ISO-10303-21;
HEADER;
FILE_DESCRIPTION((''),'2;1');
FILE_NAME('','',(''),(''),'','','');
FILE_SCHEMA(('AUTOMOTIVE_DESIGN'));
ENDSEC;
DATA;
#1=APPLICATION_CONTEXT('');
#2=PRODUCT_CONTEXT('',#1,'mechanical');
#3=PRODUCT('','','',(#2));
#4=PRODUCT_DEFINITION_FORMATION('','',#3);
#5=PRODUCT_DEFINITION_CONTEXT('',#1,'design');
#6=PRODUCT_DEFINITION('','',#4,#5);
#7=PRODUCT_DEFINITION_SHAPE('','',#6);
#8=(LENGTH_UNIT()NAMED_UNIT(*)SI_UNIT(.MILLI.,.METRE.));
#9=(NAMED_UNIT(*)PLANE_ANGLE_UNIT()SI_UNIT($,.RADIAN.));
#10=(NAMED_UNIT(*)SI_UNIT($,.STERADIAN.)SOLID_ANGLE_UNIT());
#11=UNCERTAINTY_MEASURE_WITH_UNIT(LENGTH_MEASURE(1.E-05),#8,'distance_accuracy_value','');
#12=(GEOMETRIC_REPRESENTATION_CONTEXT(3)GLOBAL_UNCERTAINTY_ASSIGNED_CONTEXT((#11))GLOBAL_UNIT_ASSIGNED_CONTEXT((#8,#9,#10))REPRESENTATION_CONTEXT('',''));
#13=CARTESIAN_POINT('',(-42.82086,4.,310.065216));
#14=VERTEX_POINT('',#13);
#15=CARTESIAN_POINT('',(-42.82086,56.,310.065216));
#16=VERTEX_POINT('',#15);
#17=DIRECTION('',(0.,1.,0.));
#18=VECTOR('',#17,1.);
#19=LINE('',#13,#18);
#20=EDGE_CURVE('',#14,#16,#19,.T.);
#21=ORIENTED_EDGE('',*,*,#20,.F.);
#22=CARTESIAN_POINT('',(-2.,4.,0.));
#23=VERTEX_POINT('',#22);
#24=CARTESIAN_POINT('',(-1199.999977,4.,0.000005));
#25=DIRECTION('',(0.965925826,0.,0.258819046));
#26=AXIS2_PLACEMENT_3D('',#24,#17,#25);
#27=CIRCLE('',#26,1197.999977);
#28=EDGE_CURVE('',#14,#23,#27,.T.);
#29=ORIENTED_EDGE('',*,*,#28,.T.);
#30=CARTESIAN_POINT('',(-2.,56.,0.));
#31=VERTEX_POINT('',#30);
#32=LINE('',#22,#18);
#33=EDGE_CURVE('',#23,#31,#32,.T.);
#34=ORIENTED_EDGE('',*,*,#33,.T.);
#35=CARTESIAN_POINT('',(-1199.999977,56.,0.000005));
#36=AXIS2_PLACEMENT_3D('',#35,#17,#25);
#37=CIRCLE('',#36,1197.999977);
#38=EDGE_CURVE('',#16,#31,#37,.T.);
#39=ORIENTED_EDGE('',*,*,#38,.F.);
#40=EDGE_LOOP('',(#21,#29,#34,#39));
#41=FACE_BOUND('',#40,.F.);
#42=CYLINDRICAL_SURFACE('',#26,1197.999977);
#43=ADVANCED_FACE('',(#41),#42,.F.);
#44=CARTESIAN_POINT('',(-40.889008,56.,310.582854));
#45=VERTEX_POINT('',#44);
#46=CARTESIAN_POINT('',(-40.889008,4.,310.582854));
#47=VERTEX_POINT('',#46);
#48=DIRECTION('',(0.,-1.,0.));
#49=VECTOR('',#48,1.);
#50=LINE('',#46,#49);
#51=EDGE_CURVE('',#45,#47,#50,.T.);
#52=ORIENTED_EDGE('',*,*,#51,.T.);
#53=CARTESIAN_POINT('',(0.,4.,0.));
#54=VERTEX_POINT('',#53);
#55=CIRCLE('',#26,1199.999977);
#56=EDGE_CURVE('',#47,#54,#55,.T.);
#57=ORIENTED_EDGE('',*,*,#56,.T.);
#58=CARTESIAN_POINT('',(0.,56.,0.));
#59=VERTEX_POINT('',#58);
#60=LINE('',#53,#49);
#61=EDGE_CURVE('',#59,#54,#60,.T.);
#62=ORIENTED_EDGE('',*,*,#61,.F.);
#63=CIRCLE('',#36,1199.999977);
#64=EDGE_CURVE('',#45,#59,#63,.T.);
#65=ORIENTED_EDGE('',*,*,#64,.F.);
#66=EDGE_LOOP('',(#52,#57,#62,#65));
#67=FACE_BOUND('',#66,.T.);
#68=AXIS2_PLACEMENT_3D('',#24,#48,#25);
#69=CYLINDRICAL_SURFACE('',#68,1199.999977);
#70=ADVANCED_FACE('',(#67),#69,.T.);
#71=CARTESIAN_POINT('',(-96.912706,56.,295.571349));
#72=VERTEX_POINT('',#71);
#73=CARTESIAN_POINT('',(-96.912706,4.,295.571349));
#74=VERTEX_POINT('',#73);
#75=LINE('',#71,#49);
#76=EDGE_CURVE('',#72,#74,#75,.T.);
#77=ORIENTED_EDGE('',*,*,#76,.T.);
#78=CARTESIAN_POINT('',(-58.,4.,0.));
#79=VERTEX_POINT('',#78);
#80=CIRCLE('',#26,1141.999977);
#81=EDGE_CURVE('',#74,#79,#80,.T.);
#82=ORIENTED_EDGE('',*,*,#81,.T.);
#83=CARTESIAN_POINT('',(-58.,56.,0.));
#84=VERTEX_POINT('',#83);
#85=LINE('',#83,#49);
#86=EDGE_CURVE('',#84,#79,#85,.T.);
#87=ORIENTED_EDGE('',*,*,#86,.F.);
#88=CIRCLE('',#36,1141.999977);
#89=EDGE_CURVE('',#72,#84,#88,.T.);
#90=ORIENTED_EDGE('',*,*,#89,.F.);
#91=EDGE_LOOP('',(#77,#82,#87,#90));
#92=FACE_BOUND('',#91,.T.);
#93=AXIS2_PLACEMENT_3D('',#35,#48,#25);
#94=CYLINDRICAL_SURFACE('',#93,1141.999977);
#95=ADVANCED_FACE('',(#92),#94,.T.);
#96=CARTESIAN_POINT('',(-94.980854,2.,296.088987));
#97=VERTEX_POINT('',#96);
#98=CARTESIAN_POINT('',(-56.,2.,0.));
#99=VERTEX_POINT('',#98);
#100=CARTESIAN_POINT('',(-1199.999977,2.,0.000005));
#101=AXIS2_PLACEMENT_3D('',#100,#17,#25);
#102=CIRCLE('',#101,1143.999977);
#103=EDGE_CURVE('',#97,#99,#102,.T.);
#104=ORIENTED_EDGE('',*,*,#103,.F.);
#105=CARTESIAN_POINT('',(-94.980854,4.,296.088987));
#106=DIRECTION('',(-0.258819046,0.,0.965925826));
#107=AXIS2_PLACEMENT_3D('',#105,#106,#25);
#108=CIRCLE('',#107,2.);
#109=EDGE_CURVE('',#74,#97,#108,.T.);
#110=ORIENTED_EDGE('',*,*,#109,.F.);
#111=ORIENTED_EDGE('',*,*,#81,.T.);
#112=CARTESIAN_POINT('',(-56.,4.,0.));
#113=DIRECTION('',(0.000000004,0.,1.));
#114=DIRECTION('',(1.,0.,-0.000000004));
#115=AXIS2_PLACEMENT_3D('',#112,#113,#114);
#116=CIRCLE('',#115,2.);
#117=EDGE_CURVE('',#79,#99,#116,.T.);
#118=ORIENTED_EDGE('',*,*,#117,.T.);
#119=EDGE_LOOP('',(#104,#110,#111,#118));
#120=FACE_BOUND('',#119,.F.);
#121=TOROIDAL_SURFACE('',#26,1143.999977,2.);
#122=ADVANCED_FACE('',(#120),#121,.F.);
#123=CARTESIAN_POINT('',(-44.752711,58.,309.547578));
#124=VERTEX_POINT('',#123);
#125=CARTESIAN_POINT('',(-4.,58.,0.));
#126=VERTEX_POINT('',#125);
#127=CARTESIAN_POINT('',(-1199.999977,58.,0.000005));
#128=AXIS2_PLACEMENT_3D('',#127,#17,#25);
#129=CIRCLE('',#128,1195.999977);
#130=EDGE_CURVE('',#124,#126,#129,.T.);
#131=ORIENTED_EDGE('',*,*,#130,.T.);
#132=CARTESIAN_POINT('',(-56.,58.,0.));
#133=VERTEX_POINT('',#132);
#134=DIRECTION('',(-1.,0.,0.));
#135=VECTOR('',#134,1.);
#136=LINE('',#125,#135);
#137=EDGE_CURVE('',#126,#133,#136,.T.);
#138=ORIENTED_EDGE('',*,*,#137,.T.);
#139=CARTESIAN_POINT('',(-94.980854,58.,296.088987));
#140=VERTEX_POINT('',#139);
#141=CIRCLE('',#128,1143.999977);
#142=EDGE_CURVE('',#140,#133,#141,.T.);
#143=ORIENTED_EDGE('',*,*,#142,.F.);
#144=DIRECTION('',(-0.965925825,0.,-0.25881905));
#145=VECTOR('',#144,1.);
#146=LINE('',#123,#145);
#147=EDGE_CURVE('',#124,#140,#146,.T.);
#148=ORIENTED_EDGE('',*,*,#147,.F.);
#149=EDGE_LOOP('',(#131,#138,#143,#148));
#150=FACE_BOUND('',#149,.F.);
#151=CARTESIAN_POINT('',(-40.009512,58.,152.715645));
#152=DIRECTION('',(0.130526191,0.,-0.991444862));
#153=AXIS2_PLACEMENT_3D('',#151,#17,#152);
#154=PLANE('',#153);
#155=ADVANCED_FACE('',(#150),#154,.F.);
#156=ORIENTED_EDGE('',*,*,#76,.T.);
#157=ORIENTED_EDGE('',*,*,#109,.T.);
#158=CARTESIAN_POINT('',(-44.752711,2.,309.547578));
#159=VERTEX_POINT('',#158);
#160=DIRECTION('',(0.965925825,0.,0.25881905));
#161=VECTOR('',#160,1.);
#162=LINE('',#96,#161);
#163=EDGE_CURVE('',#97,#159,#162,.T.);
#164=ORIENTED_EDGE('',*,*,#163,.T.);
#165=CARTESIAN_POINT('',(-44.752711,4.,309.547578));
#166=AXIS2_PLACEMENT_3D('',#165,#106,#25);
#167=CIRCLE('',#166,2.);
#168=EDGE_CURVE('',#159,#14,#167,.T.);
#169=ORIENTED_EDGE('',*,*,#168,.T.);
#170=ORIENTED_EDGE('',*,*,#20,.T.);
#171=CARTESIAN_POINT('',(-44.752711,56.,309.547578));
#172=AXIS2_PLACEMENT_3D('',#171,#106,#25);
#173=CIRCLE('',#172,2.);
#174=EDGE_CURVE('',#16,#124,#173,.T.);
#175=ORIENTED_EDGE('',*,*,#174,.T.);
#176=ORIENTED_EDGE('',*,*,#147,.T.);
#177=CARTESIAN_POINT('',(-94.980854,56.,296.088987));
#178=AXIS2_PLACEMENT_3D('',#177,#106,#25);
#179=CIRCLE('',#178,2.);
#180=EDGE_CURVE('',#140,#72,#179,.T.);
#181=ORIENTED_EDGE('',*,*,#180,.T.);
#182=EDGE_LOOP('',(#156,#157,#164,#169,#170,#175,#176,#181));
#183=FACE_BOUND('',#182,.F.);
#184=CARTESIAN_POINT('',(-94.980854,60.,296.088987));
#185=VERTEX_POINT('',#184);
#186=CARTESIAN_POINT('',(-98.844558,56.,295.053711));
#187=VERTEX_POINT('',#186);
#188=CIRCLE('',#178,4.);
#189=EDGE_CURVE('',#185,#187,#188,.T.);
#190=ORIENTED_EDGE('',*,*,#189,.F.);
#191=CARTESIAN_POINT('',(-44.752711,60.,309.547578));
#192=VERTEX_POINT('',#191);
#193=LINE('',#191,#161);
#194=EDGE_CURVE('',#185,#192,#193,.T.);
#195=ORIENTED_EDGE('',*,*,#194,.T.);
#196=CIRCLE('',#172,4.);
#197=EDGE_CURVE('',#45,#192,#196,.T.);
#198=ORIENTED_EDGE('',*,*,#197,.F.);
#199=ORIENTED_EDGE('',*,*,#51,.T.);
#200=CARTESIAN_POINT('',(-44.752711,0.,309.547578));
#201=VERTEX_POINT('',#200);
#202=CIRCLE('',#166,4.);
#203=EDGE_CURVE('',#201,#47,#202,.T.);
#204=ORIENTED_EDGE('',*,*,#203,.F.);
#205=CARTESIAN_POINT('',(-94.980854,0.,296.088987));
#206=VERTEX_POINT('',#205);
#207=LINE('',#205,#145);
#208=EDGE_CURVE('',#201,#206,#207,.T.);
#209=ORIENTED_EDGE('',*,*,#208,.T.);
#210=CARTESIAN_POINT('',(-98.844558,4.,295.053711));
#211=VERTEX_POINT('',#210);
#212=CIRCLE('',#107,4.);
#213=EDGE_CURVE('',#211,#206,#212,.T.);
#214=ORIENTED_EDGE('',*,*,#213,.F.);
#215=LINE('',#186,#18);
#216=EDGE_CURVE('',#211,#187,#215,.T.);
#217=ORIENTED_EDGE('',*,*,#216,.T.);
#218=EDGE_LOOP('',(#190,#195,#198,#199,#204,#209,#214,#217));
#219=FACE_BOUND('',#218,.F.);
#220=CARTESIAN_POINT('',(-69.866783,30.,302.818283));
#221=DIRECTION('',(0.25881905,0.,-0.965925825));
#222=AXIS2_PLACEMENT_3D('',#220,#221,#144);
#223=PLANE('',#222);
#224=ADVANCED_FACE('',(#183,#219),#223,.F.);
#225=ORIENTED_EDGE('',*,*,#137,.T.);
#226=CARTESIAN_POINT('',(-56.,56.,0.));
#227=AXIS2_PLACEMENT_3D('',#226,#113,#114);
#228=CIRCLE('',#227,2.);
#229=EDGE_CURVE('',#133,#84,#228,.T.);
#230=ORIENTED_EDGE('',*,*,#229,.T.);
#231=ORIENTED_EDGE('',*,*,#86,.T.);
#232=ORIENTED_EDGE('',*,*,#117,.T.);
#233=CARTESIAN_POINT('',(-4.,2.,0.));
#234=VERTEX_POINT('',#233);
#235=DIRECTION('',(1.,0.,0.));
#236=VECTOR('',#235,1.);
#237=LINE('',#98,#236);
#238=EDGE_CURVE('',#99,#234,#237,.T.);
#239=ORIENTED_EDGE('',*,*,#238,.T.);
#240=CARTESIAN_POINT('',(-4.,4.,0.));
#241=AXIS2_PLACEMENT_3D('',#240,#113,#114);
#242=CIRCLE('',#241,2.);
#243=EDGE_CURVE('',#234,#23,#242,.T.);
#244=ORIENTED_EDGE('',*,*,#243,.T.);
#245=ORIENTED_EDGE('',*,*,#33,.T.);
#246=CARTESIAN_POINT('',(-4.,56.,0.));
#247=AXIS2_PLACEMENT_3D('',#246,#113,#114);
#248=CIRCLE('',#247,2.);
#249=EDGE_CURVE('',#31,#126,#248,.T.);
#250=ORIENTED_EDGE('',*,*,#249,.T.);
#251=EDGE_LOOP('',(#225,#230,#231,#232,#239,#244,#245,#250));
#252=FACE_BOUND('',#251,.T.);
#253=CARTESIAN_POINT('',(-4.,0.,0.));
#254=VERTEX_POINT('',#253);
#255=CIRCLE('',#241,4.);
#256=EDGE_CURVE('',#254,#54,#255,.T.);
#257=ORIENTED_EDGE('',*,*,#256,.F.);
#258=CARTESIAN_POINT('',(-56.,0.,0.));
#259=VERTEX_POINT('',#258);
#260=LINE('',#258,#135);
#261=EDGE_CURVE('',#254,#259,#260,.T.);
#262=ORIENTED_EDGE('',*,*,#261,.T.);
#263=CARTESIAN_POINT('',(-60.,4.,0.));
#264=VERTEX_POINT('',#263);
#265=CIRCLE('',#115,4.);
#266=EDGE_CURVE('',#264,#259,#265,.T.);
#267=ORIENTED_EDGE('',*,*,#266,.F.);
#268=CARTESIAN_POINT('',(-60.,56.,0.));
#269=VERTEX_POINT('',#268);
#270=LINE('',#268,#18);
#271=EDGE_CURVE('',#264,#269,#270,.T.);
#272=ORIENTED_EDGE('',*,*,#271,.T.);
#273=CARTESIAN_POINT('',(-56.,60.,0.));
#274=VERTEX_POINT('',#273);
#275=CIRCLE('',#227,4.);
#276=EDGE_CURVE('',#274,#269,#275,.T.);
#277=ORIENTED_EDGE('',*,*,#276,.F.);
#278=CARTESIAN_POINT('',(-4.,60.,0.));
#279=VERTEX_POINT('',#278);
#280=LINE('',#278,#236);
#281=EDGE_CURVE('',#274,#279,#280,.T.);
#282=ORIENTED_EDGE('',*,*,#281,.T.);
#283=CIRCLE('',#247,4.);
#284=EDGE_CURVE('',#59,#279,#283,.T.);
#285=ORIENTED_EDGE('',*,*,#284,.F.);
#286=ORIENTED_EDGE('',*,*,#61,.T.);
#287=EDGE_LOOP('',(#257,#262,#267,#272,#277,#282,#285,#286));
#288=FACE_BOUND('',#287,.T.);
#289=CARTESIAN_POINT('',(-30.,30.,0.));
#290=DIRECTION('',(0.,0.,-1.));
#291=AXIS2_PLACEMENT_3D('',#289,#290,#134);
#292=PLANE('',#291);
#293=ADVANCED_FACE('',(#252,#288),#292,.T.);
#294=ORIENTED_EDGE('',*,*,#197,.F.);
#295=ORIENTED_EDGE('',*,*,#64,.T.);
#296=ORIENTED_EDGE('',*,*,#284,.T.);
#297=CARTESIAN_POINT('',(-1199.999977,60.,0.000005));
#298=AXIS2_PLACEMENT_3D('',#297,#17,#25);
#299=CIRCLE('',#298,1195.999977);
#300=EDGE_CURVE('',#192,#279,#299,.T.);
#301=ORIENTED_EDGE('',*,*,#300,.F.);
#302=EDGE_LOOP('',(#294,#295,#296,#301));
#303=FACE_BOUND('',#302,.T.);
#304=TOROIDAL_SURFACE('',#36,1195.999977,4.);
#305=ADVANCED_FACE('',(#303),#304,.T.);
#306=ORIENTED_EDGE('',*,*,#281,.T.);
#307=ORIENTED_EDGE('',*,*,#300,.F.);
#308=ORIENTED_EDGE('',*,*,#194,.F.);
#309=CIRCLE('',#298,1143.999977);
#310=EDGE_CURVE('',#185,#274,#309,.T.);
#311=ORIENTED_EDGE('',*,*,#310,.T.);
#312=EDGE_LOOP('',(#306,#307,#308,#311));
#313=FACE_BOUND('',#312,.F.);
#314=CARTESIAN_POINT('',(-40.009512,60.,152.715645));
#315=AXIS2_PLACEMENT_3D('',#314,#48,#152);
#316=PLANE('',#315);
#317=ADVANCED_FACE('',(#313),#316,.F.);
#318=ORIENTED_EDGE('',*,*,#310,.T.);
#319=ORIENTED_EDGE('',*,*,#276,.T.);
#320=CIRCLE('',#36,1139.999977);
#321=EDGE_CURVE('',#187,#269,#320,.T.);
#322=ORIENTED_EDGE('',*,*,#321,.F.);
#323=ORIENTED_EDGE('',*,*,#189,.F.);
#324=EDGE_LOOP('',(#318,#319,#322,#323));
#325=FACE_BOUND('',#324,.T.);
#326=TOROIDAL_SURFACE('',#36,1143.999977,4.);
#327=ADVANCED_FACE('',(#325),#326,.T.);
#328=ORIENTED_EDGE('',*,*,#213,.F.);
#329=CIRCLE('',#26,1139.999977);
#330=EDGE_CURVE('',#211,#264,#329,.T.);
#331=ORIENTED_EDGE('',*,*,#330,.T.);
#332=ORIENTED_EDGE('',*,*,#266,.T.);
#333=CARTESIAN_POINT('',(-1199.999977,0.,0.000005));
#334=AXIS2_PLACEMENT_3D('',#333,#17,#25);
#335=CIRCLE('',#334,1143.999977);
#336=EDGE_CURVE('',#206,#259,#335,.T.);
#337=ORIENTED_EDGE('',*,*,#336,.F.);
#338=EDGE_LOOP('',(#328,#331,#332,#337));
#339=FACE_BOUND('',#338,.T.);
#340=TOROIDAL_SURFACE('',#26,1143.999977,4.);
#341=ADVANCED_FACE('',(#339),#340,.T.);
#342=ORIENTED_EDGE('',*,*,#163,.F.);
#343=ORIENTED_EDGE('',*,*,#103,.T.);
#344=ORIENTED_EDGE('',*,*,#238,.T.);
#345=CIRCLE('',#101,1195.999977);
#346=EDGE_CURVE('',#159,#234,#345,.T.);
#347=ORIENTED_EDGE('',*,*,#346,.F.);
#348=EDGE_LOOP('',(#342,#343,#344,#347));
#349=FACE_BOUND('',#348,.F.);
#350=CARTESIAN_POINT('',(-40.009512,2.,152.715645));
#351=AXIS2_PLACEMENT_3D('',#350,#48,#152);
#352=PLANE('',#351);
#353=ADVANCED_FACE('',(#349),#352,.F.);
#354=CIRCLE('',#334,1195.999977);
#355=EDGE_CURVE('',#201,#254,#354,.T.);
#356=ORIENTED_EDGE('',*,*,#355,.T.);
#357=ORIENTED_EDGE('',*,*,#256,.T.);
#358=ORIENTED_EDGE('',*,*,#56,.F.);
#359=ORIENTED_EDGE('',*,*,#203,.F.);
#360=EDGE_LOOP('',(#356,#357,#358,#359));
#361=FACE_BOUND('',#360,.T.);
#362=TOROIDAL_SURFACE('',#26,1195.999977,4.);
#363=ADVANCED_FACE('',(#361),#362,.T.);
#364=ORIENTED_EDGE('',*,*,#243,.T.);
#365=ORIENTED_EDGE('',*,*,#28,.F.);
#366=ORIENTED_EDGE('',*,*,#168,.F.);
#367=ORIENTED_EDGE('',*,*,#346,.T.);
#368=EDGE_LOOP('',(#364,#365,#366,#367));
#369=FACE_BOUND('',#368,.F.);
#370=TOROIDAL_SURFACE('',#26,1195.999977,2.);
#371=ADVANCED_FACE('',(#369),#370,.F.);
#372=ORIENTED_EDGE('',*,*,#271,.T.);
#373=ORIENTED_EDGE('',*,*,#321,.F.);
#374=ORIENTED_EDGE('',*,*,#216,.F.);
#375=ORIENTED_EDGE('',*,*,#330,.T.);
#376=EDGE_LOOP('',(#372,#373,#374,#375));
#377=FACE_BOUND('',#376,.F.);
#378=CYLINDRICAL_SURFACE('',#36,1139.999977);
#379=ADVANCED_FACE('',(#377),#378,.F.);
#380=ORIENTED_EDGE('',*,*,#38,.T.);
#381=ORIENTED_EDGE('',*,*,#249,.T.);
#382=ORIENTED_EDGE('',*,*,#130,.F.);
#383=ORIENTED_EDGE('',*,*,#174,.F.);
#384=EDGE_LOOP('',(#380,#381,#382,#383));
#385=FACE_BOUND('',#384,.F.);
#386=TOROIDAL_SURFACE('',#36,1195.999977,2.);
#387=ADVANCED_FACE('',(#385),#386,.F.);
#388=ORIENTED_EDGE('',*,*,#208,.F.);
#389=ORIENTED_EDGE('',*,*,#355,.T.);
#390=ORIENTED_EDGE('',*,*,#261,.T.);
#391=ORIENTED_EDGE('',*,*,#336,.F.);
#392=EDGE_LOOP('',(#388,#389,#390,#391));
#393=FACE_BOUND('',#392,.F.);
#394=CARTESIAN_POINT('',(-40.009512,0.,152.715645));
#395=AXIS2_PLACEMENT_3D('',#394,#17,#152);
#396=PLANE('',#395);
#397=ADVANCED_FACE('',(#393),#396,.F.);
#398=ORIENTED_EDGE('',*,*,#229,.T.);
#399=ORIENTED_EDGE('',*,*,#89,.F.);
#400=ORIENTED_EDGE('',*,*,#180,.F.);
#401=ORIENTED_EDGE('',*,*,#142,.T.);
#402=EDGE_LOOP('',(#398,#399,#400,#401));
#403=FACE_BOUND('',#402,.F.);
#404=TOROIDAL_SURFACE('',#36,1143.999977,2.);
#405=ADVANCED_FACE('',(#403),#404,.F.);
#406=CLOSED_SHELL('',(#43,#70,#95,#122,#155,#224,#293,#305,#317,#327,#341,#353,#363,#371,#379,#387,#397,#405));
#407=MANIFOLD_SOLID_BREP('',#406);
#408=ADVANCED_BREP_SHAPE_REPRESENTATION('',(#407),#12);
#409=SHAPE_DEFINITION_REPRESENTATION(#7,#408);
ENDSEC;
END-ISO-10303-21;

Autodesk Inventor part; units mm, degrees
ref_plane "Start plane" through (0, 0, 0) normal (0, 0, 1) x (1, 0, 0)
ref_plane "End plane" through (0, 0, 306.305284) normal (0, 0, 1) x (1, 0, 0)
sketch "Sketch" plane through (-30, 30, 0) normal (0, 0, -1) x (-1, 0, 0)
  line L0 (-30, -26) -> (-30, 26)
  line L1 (-26, 30) -> (26, 30)
  line L2 (30, 26) -> (30, -26)
  line L3 (26, -30) -> (-26, -30)
  arc A0 (-30, -26) -> (-26, -30) centre (-26, -26) ccw
  arc A1 (30, 26) -> (26, 30) centre (26, 26) ccw
  arc A2 (-26, 30) -> (-30, 26) centre (-26, 26) ccw
  arc A3 (26, -30) -> (30, -26) centre (26, -26) ccw
  arc A4 (-26, 28) -> (-28, 26) centre (-26, 26) ccw
  line L4 (-26, 28) -> (26, 28)
  arc A5 (28, 26) -> (26, 28) centre (26, 26) ccw
  line L5 (28, 26) -> (28, -26)
  arc A6 (26, -28) -> (28, -26) centre (26, -26) ccw
  line L6 (26, -28) -> (-26, -28)
  arc A7 (-28, -26) -> (-26, -28) centre (-26, -26) ccw
  line L7 (-28, -26) -> (-28, 26)
  line L8 (0, 37.102134) -> (0, -37.102134) construction
  line L9 (-23.102134, 0) -> (23.102134, 0) construction
  dimension "d7" = 4
  dimension "d9" = 60
  dimension "d11" = 60
  dimension "d12" = 2
  dimension "d15" = 30
  dimension "d16" = 30
sketch "Sketch3" plane through (0, 0, 0) normal (0, 0, 1) x (1, 0, 0)
  line L0 (0, 0) -> (10, 0)
ref_plane "Work Plane3" through (0, 0, 0) normal (0, -1, 0) x (1, 0, 0)
sketch "Sketch4" plane through (0, 0, 0) normal (0, -1, 0) x (1, 0, 0)
  line L0 (-2, 0) -> (12, 0)
  line L1 (-120.61347, 306.305284) -> (31.768912, 306.305284)
  dimension "d18" = 306.30528
ref_plane "Orientation Work Plane" through (-30, 30, 0) normal (0, 0, -1) x (-1, 0, 0)
sketch3d "Sweep Path"
  arc A0 (-40.889008, 0, 310.582854) -> (0, 0, 0) centre (-1200, 0, 0) ccw
sweep "Body" add profiles "Sketch" path "Sweep Path"
equation "\"d7\" = G_IR"
equation "\"d9\" = G_W"
equation "\"d11\" = G_H"
equation "\"d12\" = G_T"
equation "\"d15\" = 0.5 * d9"
equation "\"d16\" = 0.5 * d11"
equation "\"G_W\" = 60"
equation "\"G_H\" = 60"
equation "\"G_T\" = 2"
equation "\"G_IR\" = 4"
equation "\"G_L\" = d18"
equation "\"G_OFFSET_START\" = 0"
equation "\"G_OFFSET_END\" = 0"
equation "\"d14\" = G_OFFSET_END + B_L"
equation "\"B_L\" = 306.30528"
properties part number "ISO 4019 - 60x60x2 - 306.305" material "Steel, Mild"
